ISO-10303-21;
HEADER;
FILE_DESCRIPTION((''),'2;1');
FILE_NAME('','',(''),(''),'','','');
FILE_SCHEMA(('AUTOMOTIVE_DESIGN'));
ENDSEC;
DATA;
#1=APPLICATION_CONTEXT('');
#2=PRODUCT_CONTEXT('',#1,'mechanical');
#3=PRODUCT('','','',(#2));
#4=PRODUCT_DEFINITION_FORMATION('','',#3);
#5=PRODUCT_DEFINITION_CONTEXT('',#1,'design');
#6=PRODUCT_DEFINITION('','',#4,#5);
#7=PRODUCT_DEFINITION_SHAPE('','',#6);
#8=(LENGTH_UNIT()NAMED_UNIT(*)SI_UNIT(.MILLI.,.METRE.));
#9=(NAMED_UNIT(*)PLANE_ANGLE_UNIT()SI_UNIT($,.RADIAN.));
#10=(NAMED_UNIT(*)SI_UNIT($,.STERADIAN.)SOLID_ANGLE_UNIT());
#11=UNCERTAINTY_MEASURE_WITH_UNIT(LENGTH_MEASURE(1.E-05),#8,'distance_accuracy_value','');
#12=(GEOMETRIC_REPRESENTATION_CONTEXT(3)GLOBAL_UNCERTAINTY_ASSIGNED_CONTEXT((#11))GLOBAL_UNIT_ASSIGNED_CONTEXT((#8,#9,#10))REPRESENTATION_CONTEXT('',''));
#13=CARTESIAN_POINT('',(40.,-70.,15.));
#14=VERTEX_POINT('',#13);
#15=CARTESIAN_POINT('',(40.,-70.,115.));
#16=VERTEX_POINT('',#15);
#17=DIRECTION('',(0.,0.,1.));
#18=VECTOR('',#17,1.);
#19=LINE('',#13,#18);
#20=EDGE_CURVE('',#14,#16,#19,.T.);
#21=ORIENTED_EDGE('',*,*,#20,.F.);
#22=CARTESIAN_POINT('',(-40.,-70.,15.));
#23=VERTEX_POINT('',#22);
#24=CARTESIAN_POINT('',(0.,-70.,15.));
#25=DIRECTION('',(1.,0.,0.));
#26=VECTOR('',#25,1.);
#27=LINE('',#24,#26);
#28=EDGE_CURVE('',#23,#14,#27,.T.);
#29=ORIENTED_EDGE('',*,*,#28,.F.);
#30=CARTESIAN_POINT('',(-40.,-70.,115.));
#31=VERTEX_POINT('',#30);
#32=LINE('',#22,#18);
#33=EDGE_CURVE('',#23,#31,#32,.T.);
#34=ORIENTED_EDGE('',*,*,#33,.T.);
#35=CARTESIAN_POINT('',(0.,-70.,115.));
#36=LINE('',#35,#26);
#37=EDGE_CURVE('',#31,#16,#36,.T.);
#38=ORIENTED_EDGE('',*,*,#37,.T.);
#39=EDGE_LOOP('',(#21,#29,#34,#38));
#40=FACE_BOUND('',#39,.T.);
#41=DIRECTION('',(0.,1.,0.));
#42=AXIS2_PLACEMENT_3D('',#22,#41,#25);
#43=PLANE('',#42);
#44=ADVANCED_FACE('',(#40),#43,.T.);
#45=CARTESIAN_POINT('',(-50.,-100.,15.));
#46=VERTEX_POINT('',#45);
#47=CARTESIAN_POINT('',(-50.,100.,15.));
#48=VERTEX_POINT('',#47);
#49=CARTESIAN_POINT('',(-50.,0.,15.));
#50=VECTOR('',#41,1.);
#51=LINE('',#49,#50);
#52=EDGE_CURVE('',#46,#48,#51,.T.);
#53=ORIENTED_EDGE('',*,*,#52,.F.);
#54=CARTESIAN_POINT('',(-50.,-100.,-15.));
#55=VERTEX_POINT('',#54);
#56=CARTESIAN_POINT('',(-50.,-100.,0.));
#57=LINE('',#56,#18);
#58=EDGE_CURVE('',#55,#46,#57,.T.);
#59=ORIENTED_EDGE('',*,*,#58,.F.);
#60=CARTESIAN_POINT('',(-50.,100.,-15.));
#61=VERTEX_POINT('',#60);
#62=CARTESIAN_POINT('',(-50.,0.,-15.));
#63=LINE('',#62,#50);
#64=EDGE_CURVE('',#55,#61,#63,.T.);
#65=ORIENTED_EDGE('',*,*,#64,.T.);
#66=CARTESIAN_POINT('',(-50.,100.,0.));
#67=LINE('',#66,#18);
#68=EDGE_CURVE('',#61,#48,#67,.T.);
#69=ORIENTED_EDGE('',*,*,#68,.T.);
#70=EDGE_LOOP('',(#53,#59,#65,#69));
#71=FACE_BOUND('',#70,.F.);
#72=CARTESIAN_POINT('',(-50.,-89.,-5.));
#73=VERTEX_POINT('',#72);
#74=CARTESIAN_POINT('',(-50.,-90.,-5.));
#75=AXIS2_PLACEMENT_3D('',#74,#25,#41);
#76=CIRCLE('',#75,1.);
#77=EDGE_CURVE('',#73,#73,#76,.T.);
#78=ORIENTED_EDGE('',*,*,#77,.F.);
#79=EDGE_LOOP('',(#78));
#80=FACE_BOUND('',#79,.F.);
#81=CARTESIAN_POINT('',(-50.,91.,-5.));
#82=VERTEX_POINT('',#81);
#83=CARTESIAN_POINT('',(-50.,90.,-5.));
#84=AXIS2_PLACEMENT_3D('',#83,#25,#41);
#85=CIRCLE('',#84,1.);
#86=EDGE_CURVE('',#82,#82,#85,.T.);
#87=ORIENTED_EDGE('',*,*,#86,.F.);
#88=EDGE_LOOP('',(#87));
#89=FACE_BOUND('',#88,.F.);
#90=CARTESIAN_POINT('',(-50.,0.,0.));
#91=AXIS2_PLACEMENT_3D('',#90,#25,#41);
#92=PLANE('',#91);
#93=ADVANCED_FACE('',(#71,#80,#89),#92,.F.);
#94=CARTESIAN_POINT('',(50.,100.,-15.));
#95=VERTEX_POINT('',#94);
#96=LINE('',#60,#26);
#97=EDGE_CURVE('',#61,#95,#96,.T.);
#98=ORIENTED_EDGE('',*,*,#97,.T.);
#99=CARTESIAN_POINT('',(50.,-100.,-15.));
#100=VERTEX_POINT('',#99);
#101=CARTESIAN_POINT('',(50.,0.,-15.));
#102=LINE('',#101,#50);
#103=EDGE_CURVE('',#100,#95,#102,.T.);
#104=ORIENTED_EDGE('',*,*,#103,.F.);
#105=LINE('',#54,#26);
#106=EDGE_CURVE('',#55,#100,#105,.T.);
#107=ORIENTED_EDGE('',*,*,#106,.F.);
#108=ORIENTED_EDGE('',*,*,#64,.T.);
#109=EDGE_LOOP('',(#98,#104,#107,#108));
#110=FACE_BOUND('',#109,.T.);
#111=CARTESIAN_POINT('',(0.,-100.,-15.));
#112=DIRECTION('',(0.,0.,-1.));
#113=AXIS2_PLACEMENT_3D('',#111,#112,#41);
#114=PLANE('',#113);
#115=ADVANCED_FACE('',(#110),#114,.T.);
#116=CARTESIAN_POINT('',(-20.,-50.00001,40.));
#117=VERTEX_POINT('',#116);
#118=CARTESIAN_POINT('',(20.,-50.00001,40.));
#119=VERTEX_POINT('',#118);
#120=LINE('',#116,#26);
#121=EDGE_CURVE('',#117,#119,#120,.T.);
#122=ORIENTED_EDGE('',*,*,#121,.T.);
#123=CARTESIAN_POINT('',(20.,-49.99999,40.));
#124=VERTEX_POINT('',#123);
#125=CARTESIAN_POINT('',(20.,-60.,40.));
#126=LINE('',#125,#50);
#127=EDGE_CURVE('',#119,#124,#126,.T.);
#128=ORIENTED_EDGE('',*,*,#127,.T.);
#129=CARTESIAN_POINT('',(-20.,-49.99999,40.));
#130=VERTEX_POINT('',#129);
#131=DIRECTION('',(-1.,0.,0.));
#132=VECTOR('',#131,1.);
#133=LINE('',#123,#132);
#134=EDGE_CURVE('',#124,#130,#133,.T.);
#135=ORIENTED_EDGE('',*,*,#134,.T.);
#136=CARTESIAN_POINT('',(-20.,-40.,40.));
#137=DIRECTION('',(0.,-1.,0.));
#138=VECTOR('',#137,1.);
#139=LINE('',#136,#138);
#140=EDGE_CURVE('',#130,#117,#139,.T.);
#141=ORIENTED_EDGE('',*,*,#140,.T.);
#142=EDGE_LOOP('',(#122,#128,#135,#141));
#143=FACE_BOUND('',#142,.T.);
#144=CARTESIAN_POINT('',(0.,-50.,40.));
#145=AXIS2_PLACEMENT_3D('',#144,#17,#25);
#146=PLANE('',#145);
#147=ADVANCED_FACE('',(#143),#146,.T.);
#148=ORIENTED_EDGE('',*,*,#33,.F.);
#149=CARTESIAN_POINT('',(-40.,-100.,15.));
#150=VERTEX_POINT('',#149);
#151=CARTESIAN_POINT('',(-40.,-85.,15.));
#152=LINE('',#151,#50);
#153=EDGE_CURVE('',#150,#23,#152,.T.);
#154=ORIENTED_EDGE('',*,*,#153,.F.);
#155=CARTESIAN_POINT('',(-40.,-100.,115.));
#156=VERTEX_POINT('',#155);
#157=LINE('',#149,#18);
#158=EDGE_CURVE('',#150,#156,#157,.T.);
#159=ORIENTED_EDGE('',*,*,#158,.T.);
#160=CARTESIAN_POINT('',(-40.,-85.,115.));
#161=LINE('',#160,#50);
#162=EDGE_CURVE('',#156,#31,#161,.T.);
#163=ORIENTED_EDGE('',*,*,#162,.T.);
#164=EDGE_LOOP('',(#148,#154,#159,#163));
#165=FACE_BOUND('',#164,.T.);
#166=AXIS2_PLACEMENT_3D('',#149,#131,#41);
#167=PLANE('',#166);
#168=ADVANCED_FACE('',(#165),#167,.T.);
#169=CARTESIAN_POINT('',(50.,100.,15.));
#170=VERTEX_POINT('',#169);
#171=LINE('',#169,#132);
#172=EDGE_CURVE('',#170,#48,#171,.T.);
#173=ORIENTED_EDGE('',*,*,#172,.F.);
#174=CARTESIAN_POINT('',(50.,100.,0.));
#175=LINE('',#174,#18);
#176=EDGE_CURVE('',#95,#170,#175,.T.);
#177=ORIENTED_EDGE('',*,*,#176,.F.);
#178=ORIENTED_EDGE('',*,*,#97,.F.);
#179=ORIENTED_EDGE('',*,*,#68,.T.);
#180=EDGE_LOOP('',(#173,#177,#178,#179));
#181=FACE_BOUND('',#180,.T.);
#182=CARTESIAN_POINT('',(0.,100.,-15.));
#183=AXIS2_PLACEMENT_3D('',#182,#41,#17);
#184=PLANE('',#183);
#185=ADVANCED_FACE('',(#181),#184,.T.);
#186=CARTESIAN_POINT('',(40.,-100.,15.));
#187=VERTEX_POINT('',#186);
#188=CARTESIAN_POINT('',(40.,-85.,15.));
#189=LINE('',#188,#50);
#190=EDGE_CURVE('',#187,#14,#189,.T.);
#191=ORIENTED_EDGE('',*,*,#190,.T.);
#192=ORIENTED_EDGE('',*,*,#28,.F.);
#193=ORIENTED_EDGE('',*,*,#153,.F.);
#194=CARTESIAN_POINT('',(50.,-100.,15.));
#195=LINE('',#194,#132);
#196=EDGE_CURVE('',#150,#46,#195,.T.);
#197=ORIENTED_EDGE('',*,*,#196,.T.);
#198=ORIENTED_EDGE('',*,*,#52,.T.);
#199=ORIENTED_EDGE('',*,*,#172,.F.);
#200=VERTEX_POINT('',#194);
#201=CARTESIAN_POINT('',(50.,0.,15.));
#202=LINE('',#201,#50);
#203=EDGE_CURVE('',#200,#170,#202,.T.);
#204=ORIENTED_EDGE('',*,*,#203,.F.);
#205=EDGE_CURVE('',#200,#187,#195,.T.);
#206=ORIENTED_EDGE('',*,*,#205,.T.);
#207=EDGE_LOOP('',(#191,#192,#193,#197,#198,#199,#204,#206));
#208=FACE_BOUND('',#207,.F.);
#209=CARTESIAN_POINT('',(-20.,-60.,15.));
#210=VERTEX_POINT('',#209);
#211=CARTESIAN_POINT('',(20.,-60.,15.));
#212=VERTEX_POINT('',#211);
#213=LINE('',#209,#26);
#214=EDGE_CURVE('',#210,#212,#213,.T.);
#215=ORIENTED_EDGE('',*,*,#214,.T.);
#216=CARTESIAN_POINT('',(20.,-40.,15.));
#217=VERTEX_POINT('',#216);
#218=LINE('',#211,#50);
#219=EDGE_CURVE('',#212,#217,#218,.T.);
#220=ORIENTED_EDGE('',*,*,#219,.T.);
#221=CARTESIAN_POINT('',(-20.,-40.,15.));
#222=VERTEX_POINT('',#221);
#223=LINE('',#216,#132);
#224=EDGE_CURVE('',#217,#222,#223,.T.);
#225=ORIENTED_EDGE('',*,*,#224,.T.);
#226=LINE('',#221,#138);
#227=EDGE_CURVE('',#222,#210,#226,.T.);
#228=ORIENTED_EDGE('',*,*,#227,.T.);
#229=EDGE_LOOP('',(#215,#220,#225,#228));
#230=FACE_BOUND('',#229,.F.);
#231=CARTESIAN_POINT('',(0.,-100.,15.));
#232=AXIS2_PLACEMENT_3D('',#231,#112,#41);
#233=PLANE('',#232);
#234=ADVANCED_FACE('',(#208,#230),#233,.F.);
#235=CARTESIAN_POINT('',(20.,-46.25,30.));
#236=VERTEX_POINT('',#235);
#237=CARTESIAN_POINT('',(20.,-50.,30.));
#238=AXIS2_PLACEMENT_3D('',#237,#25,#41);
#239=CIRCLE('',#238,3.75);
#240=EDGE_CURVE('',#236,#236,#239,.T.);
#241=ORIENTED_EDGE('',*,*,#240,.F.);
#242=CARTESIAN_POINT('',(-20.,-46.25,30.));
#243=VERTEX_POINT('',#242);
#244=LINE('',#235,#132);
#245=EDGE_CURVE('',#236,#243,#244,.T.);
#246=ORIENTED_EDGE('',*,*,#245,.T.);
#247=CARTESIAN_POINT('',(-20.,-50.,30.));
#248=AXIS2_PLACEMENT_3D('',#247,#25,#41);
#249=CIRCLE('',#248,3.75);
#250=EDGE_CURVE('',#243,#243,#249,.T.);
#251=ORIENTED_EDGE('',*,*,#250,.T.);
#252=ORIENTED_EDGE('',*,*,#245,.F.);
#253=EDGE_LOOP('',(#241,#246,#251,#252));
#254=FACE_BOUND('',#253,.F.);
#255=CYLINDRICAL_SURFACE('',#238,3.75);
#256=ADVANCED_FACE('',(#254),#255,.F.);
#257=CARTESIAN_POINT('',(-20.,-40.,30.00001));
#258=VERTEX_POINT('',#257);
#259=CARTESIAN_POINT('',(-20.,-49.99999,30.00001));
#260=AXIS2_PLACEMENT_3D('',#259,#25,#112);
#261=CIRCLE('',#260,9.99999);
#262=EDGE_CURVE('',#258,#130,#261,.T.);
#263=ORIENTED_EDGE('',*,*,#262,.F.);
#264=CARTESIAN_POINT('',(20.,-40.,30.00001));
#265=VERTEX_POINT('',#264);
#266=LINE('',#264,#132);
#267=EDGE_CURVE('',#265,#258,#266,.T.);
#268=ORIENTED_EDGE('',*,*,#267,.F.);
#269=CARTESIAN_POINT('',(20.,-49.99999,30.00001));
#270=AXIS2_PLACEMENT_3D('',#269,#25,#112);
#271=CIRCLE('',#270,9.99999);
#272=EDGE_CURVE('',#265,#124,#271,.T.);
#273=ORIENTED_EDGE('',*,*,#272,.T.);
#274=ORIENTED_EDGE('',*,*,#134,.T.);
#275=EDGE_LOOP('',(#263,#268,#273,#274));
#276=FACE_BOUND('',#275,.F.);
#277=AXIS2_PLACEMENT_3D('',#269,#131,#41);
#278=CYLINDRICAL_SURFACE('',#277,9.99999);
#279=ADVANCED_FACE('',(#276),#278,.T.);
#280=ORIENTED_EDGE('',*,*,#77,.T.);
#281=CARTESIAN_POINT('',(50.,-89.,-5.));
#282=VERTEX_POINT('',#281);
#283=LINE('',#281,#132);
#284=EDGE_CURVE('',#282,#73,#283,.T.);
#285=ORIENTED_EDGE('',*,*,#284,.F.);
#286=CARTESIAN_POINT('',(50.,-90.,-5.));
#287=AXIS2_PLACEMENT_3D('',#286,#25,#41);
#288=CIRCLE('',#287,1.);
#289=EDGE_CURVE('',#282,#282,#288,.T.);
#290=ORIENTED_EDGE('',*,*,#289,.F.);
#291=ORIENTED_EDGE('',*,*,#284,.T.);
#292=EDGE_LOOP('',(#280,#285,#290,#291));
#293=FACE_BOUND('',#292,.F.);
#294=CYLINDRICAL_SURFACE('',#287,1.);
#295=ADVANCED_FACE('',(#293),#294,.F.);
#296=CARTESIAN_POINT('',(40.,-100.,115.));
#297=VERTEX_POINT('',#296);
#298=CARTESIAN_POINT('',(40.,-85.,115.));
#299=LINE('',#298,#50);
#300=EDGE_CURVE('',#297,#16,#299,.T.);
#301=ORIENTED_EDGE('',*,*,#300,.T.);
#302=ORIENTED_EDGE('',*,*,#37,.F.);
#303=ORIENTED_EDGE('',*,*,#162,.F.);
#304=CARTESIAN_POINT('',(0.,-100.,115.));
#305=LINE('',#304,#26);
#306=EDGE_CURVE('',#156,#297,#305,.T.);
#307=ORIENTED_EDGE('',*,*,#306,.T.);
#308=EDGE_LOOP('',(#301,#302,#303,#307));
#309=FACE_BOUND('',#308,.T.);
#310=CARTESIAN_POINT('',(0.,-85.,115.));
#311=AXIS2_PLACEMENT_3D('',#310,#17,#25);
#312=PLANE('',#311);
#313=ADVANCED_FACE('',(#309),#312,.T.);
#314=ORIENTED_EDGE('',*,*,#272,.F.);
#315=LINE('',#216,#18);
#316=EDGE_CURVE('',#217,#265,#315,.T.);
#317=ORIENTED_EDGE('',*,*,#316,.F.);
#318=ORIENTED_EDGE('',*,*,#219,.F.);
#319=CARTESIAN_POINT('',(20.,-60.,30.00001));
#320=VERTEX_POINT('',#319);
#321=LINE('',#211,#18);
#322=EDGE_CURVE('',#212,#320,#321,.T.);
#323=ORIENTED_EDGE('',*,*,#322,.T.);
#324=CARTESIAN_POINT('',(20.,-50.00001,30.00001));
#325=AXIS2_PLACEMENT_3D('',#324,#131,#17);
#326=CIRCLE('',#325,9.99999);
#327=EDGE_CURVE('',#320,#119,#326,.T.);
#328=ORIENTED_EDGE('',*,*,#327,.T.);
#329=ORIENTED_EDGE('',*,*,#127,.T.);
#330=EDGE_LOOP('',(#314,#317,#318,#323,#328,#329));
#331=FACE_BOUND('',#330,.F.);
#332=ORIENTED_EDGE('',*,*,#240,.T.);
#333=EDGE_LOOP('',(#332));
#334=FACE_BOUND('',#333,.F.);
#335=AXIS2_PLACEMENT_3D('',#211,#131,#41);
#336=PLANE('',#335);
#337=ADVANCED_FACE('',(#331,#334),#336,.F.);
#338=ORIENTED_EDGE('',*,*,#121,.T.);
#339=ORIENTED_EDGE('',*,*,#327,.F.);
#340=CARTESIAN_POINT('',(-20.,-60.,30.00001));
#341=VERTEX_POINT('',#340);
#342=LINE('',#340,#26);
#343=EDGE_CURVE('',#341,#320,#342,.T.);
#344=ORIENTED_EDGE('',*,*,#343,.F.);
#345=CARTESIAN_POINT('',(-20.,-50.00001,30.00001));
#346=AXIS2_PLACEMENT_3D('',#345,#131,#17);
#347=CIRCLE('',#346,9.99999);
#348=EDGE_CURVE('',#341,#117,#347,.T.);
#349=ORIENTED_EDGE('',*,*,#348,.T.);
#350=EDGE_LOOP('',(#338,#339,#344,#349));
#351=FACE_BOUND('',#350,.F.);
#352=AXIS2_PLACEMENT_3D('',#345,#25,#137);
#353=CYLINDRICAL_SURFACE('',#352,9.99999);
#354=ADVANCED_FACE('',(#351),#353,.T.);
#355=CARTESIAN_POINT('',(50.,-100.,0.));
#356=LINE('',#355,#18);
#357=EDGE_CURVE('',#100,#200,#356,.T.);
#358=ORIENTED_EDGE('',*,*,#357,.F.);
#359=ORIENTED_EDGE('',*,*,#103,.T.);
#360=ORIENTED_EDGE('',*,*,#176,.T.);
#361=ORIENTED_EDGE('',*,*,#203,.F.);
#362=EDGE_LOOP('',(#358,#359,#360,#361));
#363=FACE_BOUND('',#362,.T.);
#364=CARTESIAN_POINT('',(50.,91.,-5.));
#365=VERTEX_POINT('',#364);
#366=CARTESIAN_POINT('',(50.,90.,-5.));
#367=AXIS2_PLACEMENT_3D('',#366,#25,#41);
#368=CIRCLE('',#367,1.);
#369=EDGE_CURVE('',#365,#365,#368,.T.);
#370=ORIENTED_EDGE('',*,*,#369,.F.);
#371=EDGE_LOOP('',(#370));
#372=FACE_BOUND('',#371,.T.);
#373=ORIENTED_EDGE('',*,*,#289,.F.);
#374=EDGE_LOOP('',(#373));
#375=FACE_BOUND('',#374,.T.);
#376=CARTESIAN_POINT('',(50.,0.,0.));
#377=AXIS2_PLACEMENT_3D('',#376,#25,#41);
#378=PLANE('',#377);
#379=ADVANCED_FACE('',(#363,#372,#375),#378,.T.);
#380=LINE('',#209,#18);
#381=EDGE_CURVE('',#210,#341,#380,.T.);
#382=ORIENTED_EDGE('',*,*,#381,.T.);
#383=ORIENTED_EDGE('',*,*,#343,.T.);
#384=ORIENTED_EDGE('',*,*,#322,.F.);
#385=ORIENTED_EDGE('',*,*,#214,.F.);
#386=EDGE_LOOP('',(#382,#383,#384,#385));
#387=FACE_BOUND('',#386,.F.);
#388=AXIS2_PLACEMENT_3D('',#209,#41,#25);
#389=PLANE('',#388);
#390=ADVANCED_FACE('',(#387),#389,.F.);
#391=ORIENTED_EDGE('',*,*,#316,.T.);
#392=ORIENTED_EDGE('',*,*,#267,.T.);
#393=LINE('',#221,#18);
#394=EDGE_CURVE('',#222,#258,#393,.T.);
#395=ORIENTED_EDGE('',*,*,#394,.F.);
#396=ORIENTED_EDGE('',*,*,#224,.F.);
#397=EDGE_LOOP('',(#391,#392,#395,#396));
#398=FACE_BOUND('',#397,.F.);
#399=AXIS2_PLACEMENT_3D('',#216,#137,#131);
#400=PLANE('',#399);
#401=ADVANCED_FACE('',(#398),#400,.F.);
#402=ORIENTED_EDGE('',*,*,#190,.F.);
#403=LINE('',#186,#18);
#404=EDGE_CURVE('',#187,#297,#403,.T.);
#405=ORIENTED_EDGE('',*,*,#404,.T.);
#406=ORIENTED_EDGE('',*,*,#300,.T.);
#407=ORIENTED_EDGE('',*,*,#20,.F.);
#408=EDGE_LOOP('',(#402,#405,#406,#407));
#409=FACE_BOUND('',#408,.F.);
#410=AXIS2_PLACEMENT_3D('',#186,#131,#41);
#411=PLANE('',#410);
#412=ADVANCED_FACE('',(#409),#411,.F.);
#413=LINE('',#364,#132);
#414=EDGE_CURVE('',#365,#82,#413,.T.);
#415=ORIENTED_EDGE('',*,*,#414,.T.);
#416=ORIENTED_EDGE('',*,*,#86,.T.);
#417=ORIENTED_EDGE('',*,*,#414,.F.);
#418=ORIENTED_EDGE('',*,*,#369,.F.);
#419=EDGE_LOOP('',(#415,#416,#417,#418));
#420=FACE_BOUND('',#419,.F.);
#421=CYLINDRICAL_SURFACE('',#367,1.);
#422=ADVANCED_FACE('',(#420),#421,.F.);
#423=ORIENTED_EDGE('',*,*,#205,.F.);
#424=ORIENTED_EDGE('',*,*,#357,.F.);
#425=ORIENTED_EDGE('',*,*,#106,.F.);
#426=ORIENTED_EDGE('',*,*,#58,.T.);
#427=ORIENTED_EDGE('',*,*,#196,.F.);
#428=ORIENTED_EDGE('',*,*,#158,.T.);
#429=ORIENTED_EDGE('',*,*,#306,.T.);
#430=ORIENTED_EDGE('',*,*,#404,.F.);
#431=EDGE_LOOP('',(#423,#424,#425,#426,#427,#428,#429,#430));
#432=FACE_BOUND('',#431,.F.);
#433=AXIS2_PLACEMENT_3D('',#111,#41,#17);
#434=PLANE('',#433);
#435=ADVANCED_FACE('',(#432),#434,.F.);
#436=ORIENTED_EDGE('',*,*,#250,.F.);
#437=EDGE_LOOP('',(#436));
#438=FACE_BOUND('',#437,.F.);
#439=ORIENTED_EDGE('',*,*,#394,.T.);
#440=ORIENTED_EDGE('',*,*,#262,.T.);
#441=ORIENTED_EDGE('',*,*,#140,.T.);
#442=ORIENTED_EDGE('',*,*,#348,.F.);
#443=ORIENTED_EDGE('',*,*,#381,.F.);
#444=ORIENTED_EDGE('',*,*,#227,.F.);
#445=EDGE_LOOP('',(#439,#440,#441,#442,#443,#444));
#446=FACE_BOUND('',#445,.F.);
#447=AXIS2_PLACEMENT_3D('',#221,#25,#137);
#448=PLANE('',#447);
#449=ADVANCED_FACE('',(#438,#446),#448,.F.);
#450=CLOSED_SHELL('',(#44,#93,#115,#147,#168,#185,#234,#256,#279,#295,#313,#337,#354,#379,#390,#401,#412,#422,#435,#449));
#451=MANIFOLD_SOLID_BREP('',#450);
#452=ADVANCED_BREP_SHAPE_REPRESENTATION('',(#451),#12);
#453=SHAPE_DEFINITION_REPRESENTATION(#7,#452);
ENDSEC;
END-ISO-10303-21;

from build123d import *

# Parameters (mm, degrees)
F0_W      = 200
F0_H      = 30
F1_DEPTH  = 50
F2_W      = 80
F2_H      = 30
F3_DEPTH  = 100
F5_DEPTH  = 25
F6_R      = 3.75
F7_DEPTH  = 70.001
F8_R      = 9.99999
F9_R      = 1
F10_DEPTH = 100.001


# Not quite as in the source:
# - a fillet or chamfer is up to 0.001 mm smaller than in the source, because OpenCascade refuses the exact size


with BuildPart() as f1:
    # F0 (on Right) → F1 (new body, symmetric)
    with BuildSketch(Plane.YZ):
        Rectangle(F0_W, F0_H)
    extrude(amount=F1_DEPTH, both=True)

    # F2 (on face) → F3 (join)
    with BuildSketch(Plane.XY.offset(15)):
        with Locations((0, -85)):
            Rectangle(F2_W, F2_H)
    extrude(amount=F3_DEPTH)

    # F4 (on face) → F5 (join)
    with BuildSketch(Plane.XY.offset(15)):
        Polygon((-20, -40), (-20, -60), (0, -60), (20, -60), (20, -40), align=None)
    extrude(amount=F5_DEPTH)

    # F6 (on face) → F7 (cut, through all)
    with BuildSketch(Plane.YZ.offset(20)):
        with Locations((-50, 30)):
            Circle(F6_R)
    extrude(amount=-F7_DEPTH, mode=Mode.SUBTRACT)

    # F8 (radius 10 in the source; OpenCascade refuses exactly that, so slightly less here)
    f8_edges = [f1.edges().sort_by_distance(p)[0] for p in [
        (0, -40, 40),
        (0, -60, 40),
    ]]
    fillet(f8_edges, radius=F8_R)

    # F9 (on face) → F10 (cut, through all)
    with BuildSketch(Plane.YZ.offset(50)):
        with Locations((90, -5)):
            Circle(F9_R)
        with Locations((-90, -5)):
            Circle(F9_R)
    extrude(amount=-F10_DEPTH, mode=Mode.SUBTRACT)


solid = f1.part
